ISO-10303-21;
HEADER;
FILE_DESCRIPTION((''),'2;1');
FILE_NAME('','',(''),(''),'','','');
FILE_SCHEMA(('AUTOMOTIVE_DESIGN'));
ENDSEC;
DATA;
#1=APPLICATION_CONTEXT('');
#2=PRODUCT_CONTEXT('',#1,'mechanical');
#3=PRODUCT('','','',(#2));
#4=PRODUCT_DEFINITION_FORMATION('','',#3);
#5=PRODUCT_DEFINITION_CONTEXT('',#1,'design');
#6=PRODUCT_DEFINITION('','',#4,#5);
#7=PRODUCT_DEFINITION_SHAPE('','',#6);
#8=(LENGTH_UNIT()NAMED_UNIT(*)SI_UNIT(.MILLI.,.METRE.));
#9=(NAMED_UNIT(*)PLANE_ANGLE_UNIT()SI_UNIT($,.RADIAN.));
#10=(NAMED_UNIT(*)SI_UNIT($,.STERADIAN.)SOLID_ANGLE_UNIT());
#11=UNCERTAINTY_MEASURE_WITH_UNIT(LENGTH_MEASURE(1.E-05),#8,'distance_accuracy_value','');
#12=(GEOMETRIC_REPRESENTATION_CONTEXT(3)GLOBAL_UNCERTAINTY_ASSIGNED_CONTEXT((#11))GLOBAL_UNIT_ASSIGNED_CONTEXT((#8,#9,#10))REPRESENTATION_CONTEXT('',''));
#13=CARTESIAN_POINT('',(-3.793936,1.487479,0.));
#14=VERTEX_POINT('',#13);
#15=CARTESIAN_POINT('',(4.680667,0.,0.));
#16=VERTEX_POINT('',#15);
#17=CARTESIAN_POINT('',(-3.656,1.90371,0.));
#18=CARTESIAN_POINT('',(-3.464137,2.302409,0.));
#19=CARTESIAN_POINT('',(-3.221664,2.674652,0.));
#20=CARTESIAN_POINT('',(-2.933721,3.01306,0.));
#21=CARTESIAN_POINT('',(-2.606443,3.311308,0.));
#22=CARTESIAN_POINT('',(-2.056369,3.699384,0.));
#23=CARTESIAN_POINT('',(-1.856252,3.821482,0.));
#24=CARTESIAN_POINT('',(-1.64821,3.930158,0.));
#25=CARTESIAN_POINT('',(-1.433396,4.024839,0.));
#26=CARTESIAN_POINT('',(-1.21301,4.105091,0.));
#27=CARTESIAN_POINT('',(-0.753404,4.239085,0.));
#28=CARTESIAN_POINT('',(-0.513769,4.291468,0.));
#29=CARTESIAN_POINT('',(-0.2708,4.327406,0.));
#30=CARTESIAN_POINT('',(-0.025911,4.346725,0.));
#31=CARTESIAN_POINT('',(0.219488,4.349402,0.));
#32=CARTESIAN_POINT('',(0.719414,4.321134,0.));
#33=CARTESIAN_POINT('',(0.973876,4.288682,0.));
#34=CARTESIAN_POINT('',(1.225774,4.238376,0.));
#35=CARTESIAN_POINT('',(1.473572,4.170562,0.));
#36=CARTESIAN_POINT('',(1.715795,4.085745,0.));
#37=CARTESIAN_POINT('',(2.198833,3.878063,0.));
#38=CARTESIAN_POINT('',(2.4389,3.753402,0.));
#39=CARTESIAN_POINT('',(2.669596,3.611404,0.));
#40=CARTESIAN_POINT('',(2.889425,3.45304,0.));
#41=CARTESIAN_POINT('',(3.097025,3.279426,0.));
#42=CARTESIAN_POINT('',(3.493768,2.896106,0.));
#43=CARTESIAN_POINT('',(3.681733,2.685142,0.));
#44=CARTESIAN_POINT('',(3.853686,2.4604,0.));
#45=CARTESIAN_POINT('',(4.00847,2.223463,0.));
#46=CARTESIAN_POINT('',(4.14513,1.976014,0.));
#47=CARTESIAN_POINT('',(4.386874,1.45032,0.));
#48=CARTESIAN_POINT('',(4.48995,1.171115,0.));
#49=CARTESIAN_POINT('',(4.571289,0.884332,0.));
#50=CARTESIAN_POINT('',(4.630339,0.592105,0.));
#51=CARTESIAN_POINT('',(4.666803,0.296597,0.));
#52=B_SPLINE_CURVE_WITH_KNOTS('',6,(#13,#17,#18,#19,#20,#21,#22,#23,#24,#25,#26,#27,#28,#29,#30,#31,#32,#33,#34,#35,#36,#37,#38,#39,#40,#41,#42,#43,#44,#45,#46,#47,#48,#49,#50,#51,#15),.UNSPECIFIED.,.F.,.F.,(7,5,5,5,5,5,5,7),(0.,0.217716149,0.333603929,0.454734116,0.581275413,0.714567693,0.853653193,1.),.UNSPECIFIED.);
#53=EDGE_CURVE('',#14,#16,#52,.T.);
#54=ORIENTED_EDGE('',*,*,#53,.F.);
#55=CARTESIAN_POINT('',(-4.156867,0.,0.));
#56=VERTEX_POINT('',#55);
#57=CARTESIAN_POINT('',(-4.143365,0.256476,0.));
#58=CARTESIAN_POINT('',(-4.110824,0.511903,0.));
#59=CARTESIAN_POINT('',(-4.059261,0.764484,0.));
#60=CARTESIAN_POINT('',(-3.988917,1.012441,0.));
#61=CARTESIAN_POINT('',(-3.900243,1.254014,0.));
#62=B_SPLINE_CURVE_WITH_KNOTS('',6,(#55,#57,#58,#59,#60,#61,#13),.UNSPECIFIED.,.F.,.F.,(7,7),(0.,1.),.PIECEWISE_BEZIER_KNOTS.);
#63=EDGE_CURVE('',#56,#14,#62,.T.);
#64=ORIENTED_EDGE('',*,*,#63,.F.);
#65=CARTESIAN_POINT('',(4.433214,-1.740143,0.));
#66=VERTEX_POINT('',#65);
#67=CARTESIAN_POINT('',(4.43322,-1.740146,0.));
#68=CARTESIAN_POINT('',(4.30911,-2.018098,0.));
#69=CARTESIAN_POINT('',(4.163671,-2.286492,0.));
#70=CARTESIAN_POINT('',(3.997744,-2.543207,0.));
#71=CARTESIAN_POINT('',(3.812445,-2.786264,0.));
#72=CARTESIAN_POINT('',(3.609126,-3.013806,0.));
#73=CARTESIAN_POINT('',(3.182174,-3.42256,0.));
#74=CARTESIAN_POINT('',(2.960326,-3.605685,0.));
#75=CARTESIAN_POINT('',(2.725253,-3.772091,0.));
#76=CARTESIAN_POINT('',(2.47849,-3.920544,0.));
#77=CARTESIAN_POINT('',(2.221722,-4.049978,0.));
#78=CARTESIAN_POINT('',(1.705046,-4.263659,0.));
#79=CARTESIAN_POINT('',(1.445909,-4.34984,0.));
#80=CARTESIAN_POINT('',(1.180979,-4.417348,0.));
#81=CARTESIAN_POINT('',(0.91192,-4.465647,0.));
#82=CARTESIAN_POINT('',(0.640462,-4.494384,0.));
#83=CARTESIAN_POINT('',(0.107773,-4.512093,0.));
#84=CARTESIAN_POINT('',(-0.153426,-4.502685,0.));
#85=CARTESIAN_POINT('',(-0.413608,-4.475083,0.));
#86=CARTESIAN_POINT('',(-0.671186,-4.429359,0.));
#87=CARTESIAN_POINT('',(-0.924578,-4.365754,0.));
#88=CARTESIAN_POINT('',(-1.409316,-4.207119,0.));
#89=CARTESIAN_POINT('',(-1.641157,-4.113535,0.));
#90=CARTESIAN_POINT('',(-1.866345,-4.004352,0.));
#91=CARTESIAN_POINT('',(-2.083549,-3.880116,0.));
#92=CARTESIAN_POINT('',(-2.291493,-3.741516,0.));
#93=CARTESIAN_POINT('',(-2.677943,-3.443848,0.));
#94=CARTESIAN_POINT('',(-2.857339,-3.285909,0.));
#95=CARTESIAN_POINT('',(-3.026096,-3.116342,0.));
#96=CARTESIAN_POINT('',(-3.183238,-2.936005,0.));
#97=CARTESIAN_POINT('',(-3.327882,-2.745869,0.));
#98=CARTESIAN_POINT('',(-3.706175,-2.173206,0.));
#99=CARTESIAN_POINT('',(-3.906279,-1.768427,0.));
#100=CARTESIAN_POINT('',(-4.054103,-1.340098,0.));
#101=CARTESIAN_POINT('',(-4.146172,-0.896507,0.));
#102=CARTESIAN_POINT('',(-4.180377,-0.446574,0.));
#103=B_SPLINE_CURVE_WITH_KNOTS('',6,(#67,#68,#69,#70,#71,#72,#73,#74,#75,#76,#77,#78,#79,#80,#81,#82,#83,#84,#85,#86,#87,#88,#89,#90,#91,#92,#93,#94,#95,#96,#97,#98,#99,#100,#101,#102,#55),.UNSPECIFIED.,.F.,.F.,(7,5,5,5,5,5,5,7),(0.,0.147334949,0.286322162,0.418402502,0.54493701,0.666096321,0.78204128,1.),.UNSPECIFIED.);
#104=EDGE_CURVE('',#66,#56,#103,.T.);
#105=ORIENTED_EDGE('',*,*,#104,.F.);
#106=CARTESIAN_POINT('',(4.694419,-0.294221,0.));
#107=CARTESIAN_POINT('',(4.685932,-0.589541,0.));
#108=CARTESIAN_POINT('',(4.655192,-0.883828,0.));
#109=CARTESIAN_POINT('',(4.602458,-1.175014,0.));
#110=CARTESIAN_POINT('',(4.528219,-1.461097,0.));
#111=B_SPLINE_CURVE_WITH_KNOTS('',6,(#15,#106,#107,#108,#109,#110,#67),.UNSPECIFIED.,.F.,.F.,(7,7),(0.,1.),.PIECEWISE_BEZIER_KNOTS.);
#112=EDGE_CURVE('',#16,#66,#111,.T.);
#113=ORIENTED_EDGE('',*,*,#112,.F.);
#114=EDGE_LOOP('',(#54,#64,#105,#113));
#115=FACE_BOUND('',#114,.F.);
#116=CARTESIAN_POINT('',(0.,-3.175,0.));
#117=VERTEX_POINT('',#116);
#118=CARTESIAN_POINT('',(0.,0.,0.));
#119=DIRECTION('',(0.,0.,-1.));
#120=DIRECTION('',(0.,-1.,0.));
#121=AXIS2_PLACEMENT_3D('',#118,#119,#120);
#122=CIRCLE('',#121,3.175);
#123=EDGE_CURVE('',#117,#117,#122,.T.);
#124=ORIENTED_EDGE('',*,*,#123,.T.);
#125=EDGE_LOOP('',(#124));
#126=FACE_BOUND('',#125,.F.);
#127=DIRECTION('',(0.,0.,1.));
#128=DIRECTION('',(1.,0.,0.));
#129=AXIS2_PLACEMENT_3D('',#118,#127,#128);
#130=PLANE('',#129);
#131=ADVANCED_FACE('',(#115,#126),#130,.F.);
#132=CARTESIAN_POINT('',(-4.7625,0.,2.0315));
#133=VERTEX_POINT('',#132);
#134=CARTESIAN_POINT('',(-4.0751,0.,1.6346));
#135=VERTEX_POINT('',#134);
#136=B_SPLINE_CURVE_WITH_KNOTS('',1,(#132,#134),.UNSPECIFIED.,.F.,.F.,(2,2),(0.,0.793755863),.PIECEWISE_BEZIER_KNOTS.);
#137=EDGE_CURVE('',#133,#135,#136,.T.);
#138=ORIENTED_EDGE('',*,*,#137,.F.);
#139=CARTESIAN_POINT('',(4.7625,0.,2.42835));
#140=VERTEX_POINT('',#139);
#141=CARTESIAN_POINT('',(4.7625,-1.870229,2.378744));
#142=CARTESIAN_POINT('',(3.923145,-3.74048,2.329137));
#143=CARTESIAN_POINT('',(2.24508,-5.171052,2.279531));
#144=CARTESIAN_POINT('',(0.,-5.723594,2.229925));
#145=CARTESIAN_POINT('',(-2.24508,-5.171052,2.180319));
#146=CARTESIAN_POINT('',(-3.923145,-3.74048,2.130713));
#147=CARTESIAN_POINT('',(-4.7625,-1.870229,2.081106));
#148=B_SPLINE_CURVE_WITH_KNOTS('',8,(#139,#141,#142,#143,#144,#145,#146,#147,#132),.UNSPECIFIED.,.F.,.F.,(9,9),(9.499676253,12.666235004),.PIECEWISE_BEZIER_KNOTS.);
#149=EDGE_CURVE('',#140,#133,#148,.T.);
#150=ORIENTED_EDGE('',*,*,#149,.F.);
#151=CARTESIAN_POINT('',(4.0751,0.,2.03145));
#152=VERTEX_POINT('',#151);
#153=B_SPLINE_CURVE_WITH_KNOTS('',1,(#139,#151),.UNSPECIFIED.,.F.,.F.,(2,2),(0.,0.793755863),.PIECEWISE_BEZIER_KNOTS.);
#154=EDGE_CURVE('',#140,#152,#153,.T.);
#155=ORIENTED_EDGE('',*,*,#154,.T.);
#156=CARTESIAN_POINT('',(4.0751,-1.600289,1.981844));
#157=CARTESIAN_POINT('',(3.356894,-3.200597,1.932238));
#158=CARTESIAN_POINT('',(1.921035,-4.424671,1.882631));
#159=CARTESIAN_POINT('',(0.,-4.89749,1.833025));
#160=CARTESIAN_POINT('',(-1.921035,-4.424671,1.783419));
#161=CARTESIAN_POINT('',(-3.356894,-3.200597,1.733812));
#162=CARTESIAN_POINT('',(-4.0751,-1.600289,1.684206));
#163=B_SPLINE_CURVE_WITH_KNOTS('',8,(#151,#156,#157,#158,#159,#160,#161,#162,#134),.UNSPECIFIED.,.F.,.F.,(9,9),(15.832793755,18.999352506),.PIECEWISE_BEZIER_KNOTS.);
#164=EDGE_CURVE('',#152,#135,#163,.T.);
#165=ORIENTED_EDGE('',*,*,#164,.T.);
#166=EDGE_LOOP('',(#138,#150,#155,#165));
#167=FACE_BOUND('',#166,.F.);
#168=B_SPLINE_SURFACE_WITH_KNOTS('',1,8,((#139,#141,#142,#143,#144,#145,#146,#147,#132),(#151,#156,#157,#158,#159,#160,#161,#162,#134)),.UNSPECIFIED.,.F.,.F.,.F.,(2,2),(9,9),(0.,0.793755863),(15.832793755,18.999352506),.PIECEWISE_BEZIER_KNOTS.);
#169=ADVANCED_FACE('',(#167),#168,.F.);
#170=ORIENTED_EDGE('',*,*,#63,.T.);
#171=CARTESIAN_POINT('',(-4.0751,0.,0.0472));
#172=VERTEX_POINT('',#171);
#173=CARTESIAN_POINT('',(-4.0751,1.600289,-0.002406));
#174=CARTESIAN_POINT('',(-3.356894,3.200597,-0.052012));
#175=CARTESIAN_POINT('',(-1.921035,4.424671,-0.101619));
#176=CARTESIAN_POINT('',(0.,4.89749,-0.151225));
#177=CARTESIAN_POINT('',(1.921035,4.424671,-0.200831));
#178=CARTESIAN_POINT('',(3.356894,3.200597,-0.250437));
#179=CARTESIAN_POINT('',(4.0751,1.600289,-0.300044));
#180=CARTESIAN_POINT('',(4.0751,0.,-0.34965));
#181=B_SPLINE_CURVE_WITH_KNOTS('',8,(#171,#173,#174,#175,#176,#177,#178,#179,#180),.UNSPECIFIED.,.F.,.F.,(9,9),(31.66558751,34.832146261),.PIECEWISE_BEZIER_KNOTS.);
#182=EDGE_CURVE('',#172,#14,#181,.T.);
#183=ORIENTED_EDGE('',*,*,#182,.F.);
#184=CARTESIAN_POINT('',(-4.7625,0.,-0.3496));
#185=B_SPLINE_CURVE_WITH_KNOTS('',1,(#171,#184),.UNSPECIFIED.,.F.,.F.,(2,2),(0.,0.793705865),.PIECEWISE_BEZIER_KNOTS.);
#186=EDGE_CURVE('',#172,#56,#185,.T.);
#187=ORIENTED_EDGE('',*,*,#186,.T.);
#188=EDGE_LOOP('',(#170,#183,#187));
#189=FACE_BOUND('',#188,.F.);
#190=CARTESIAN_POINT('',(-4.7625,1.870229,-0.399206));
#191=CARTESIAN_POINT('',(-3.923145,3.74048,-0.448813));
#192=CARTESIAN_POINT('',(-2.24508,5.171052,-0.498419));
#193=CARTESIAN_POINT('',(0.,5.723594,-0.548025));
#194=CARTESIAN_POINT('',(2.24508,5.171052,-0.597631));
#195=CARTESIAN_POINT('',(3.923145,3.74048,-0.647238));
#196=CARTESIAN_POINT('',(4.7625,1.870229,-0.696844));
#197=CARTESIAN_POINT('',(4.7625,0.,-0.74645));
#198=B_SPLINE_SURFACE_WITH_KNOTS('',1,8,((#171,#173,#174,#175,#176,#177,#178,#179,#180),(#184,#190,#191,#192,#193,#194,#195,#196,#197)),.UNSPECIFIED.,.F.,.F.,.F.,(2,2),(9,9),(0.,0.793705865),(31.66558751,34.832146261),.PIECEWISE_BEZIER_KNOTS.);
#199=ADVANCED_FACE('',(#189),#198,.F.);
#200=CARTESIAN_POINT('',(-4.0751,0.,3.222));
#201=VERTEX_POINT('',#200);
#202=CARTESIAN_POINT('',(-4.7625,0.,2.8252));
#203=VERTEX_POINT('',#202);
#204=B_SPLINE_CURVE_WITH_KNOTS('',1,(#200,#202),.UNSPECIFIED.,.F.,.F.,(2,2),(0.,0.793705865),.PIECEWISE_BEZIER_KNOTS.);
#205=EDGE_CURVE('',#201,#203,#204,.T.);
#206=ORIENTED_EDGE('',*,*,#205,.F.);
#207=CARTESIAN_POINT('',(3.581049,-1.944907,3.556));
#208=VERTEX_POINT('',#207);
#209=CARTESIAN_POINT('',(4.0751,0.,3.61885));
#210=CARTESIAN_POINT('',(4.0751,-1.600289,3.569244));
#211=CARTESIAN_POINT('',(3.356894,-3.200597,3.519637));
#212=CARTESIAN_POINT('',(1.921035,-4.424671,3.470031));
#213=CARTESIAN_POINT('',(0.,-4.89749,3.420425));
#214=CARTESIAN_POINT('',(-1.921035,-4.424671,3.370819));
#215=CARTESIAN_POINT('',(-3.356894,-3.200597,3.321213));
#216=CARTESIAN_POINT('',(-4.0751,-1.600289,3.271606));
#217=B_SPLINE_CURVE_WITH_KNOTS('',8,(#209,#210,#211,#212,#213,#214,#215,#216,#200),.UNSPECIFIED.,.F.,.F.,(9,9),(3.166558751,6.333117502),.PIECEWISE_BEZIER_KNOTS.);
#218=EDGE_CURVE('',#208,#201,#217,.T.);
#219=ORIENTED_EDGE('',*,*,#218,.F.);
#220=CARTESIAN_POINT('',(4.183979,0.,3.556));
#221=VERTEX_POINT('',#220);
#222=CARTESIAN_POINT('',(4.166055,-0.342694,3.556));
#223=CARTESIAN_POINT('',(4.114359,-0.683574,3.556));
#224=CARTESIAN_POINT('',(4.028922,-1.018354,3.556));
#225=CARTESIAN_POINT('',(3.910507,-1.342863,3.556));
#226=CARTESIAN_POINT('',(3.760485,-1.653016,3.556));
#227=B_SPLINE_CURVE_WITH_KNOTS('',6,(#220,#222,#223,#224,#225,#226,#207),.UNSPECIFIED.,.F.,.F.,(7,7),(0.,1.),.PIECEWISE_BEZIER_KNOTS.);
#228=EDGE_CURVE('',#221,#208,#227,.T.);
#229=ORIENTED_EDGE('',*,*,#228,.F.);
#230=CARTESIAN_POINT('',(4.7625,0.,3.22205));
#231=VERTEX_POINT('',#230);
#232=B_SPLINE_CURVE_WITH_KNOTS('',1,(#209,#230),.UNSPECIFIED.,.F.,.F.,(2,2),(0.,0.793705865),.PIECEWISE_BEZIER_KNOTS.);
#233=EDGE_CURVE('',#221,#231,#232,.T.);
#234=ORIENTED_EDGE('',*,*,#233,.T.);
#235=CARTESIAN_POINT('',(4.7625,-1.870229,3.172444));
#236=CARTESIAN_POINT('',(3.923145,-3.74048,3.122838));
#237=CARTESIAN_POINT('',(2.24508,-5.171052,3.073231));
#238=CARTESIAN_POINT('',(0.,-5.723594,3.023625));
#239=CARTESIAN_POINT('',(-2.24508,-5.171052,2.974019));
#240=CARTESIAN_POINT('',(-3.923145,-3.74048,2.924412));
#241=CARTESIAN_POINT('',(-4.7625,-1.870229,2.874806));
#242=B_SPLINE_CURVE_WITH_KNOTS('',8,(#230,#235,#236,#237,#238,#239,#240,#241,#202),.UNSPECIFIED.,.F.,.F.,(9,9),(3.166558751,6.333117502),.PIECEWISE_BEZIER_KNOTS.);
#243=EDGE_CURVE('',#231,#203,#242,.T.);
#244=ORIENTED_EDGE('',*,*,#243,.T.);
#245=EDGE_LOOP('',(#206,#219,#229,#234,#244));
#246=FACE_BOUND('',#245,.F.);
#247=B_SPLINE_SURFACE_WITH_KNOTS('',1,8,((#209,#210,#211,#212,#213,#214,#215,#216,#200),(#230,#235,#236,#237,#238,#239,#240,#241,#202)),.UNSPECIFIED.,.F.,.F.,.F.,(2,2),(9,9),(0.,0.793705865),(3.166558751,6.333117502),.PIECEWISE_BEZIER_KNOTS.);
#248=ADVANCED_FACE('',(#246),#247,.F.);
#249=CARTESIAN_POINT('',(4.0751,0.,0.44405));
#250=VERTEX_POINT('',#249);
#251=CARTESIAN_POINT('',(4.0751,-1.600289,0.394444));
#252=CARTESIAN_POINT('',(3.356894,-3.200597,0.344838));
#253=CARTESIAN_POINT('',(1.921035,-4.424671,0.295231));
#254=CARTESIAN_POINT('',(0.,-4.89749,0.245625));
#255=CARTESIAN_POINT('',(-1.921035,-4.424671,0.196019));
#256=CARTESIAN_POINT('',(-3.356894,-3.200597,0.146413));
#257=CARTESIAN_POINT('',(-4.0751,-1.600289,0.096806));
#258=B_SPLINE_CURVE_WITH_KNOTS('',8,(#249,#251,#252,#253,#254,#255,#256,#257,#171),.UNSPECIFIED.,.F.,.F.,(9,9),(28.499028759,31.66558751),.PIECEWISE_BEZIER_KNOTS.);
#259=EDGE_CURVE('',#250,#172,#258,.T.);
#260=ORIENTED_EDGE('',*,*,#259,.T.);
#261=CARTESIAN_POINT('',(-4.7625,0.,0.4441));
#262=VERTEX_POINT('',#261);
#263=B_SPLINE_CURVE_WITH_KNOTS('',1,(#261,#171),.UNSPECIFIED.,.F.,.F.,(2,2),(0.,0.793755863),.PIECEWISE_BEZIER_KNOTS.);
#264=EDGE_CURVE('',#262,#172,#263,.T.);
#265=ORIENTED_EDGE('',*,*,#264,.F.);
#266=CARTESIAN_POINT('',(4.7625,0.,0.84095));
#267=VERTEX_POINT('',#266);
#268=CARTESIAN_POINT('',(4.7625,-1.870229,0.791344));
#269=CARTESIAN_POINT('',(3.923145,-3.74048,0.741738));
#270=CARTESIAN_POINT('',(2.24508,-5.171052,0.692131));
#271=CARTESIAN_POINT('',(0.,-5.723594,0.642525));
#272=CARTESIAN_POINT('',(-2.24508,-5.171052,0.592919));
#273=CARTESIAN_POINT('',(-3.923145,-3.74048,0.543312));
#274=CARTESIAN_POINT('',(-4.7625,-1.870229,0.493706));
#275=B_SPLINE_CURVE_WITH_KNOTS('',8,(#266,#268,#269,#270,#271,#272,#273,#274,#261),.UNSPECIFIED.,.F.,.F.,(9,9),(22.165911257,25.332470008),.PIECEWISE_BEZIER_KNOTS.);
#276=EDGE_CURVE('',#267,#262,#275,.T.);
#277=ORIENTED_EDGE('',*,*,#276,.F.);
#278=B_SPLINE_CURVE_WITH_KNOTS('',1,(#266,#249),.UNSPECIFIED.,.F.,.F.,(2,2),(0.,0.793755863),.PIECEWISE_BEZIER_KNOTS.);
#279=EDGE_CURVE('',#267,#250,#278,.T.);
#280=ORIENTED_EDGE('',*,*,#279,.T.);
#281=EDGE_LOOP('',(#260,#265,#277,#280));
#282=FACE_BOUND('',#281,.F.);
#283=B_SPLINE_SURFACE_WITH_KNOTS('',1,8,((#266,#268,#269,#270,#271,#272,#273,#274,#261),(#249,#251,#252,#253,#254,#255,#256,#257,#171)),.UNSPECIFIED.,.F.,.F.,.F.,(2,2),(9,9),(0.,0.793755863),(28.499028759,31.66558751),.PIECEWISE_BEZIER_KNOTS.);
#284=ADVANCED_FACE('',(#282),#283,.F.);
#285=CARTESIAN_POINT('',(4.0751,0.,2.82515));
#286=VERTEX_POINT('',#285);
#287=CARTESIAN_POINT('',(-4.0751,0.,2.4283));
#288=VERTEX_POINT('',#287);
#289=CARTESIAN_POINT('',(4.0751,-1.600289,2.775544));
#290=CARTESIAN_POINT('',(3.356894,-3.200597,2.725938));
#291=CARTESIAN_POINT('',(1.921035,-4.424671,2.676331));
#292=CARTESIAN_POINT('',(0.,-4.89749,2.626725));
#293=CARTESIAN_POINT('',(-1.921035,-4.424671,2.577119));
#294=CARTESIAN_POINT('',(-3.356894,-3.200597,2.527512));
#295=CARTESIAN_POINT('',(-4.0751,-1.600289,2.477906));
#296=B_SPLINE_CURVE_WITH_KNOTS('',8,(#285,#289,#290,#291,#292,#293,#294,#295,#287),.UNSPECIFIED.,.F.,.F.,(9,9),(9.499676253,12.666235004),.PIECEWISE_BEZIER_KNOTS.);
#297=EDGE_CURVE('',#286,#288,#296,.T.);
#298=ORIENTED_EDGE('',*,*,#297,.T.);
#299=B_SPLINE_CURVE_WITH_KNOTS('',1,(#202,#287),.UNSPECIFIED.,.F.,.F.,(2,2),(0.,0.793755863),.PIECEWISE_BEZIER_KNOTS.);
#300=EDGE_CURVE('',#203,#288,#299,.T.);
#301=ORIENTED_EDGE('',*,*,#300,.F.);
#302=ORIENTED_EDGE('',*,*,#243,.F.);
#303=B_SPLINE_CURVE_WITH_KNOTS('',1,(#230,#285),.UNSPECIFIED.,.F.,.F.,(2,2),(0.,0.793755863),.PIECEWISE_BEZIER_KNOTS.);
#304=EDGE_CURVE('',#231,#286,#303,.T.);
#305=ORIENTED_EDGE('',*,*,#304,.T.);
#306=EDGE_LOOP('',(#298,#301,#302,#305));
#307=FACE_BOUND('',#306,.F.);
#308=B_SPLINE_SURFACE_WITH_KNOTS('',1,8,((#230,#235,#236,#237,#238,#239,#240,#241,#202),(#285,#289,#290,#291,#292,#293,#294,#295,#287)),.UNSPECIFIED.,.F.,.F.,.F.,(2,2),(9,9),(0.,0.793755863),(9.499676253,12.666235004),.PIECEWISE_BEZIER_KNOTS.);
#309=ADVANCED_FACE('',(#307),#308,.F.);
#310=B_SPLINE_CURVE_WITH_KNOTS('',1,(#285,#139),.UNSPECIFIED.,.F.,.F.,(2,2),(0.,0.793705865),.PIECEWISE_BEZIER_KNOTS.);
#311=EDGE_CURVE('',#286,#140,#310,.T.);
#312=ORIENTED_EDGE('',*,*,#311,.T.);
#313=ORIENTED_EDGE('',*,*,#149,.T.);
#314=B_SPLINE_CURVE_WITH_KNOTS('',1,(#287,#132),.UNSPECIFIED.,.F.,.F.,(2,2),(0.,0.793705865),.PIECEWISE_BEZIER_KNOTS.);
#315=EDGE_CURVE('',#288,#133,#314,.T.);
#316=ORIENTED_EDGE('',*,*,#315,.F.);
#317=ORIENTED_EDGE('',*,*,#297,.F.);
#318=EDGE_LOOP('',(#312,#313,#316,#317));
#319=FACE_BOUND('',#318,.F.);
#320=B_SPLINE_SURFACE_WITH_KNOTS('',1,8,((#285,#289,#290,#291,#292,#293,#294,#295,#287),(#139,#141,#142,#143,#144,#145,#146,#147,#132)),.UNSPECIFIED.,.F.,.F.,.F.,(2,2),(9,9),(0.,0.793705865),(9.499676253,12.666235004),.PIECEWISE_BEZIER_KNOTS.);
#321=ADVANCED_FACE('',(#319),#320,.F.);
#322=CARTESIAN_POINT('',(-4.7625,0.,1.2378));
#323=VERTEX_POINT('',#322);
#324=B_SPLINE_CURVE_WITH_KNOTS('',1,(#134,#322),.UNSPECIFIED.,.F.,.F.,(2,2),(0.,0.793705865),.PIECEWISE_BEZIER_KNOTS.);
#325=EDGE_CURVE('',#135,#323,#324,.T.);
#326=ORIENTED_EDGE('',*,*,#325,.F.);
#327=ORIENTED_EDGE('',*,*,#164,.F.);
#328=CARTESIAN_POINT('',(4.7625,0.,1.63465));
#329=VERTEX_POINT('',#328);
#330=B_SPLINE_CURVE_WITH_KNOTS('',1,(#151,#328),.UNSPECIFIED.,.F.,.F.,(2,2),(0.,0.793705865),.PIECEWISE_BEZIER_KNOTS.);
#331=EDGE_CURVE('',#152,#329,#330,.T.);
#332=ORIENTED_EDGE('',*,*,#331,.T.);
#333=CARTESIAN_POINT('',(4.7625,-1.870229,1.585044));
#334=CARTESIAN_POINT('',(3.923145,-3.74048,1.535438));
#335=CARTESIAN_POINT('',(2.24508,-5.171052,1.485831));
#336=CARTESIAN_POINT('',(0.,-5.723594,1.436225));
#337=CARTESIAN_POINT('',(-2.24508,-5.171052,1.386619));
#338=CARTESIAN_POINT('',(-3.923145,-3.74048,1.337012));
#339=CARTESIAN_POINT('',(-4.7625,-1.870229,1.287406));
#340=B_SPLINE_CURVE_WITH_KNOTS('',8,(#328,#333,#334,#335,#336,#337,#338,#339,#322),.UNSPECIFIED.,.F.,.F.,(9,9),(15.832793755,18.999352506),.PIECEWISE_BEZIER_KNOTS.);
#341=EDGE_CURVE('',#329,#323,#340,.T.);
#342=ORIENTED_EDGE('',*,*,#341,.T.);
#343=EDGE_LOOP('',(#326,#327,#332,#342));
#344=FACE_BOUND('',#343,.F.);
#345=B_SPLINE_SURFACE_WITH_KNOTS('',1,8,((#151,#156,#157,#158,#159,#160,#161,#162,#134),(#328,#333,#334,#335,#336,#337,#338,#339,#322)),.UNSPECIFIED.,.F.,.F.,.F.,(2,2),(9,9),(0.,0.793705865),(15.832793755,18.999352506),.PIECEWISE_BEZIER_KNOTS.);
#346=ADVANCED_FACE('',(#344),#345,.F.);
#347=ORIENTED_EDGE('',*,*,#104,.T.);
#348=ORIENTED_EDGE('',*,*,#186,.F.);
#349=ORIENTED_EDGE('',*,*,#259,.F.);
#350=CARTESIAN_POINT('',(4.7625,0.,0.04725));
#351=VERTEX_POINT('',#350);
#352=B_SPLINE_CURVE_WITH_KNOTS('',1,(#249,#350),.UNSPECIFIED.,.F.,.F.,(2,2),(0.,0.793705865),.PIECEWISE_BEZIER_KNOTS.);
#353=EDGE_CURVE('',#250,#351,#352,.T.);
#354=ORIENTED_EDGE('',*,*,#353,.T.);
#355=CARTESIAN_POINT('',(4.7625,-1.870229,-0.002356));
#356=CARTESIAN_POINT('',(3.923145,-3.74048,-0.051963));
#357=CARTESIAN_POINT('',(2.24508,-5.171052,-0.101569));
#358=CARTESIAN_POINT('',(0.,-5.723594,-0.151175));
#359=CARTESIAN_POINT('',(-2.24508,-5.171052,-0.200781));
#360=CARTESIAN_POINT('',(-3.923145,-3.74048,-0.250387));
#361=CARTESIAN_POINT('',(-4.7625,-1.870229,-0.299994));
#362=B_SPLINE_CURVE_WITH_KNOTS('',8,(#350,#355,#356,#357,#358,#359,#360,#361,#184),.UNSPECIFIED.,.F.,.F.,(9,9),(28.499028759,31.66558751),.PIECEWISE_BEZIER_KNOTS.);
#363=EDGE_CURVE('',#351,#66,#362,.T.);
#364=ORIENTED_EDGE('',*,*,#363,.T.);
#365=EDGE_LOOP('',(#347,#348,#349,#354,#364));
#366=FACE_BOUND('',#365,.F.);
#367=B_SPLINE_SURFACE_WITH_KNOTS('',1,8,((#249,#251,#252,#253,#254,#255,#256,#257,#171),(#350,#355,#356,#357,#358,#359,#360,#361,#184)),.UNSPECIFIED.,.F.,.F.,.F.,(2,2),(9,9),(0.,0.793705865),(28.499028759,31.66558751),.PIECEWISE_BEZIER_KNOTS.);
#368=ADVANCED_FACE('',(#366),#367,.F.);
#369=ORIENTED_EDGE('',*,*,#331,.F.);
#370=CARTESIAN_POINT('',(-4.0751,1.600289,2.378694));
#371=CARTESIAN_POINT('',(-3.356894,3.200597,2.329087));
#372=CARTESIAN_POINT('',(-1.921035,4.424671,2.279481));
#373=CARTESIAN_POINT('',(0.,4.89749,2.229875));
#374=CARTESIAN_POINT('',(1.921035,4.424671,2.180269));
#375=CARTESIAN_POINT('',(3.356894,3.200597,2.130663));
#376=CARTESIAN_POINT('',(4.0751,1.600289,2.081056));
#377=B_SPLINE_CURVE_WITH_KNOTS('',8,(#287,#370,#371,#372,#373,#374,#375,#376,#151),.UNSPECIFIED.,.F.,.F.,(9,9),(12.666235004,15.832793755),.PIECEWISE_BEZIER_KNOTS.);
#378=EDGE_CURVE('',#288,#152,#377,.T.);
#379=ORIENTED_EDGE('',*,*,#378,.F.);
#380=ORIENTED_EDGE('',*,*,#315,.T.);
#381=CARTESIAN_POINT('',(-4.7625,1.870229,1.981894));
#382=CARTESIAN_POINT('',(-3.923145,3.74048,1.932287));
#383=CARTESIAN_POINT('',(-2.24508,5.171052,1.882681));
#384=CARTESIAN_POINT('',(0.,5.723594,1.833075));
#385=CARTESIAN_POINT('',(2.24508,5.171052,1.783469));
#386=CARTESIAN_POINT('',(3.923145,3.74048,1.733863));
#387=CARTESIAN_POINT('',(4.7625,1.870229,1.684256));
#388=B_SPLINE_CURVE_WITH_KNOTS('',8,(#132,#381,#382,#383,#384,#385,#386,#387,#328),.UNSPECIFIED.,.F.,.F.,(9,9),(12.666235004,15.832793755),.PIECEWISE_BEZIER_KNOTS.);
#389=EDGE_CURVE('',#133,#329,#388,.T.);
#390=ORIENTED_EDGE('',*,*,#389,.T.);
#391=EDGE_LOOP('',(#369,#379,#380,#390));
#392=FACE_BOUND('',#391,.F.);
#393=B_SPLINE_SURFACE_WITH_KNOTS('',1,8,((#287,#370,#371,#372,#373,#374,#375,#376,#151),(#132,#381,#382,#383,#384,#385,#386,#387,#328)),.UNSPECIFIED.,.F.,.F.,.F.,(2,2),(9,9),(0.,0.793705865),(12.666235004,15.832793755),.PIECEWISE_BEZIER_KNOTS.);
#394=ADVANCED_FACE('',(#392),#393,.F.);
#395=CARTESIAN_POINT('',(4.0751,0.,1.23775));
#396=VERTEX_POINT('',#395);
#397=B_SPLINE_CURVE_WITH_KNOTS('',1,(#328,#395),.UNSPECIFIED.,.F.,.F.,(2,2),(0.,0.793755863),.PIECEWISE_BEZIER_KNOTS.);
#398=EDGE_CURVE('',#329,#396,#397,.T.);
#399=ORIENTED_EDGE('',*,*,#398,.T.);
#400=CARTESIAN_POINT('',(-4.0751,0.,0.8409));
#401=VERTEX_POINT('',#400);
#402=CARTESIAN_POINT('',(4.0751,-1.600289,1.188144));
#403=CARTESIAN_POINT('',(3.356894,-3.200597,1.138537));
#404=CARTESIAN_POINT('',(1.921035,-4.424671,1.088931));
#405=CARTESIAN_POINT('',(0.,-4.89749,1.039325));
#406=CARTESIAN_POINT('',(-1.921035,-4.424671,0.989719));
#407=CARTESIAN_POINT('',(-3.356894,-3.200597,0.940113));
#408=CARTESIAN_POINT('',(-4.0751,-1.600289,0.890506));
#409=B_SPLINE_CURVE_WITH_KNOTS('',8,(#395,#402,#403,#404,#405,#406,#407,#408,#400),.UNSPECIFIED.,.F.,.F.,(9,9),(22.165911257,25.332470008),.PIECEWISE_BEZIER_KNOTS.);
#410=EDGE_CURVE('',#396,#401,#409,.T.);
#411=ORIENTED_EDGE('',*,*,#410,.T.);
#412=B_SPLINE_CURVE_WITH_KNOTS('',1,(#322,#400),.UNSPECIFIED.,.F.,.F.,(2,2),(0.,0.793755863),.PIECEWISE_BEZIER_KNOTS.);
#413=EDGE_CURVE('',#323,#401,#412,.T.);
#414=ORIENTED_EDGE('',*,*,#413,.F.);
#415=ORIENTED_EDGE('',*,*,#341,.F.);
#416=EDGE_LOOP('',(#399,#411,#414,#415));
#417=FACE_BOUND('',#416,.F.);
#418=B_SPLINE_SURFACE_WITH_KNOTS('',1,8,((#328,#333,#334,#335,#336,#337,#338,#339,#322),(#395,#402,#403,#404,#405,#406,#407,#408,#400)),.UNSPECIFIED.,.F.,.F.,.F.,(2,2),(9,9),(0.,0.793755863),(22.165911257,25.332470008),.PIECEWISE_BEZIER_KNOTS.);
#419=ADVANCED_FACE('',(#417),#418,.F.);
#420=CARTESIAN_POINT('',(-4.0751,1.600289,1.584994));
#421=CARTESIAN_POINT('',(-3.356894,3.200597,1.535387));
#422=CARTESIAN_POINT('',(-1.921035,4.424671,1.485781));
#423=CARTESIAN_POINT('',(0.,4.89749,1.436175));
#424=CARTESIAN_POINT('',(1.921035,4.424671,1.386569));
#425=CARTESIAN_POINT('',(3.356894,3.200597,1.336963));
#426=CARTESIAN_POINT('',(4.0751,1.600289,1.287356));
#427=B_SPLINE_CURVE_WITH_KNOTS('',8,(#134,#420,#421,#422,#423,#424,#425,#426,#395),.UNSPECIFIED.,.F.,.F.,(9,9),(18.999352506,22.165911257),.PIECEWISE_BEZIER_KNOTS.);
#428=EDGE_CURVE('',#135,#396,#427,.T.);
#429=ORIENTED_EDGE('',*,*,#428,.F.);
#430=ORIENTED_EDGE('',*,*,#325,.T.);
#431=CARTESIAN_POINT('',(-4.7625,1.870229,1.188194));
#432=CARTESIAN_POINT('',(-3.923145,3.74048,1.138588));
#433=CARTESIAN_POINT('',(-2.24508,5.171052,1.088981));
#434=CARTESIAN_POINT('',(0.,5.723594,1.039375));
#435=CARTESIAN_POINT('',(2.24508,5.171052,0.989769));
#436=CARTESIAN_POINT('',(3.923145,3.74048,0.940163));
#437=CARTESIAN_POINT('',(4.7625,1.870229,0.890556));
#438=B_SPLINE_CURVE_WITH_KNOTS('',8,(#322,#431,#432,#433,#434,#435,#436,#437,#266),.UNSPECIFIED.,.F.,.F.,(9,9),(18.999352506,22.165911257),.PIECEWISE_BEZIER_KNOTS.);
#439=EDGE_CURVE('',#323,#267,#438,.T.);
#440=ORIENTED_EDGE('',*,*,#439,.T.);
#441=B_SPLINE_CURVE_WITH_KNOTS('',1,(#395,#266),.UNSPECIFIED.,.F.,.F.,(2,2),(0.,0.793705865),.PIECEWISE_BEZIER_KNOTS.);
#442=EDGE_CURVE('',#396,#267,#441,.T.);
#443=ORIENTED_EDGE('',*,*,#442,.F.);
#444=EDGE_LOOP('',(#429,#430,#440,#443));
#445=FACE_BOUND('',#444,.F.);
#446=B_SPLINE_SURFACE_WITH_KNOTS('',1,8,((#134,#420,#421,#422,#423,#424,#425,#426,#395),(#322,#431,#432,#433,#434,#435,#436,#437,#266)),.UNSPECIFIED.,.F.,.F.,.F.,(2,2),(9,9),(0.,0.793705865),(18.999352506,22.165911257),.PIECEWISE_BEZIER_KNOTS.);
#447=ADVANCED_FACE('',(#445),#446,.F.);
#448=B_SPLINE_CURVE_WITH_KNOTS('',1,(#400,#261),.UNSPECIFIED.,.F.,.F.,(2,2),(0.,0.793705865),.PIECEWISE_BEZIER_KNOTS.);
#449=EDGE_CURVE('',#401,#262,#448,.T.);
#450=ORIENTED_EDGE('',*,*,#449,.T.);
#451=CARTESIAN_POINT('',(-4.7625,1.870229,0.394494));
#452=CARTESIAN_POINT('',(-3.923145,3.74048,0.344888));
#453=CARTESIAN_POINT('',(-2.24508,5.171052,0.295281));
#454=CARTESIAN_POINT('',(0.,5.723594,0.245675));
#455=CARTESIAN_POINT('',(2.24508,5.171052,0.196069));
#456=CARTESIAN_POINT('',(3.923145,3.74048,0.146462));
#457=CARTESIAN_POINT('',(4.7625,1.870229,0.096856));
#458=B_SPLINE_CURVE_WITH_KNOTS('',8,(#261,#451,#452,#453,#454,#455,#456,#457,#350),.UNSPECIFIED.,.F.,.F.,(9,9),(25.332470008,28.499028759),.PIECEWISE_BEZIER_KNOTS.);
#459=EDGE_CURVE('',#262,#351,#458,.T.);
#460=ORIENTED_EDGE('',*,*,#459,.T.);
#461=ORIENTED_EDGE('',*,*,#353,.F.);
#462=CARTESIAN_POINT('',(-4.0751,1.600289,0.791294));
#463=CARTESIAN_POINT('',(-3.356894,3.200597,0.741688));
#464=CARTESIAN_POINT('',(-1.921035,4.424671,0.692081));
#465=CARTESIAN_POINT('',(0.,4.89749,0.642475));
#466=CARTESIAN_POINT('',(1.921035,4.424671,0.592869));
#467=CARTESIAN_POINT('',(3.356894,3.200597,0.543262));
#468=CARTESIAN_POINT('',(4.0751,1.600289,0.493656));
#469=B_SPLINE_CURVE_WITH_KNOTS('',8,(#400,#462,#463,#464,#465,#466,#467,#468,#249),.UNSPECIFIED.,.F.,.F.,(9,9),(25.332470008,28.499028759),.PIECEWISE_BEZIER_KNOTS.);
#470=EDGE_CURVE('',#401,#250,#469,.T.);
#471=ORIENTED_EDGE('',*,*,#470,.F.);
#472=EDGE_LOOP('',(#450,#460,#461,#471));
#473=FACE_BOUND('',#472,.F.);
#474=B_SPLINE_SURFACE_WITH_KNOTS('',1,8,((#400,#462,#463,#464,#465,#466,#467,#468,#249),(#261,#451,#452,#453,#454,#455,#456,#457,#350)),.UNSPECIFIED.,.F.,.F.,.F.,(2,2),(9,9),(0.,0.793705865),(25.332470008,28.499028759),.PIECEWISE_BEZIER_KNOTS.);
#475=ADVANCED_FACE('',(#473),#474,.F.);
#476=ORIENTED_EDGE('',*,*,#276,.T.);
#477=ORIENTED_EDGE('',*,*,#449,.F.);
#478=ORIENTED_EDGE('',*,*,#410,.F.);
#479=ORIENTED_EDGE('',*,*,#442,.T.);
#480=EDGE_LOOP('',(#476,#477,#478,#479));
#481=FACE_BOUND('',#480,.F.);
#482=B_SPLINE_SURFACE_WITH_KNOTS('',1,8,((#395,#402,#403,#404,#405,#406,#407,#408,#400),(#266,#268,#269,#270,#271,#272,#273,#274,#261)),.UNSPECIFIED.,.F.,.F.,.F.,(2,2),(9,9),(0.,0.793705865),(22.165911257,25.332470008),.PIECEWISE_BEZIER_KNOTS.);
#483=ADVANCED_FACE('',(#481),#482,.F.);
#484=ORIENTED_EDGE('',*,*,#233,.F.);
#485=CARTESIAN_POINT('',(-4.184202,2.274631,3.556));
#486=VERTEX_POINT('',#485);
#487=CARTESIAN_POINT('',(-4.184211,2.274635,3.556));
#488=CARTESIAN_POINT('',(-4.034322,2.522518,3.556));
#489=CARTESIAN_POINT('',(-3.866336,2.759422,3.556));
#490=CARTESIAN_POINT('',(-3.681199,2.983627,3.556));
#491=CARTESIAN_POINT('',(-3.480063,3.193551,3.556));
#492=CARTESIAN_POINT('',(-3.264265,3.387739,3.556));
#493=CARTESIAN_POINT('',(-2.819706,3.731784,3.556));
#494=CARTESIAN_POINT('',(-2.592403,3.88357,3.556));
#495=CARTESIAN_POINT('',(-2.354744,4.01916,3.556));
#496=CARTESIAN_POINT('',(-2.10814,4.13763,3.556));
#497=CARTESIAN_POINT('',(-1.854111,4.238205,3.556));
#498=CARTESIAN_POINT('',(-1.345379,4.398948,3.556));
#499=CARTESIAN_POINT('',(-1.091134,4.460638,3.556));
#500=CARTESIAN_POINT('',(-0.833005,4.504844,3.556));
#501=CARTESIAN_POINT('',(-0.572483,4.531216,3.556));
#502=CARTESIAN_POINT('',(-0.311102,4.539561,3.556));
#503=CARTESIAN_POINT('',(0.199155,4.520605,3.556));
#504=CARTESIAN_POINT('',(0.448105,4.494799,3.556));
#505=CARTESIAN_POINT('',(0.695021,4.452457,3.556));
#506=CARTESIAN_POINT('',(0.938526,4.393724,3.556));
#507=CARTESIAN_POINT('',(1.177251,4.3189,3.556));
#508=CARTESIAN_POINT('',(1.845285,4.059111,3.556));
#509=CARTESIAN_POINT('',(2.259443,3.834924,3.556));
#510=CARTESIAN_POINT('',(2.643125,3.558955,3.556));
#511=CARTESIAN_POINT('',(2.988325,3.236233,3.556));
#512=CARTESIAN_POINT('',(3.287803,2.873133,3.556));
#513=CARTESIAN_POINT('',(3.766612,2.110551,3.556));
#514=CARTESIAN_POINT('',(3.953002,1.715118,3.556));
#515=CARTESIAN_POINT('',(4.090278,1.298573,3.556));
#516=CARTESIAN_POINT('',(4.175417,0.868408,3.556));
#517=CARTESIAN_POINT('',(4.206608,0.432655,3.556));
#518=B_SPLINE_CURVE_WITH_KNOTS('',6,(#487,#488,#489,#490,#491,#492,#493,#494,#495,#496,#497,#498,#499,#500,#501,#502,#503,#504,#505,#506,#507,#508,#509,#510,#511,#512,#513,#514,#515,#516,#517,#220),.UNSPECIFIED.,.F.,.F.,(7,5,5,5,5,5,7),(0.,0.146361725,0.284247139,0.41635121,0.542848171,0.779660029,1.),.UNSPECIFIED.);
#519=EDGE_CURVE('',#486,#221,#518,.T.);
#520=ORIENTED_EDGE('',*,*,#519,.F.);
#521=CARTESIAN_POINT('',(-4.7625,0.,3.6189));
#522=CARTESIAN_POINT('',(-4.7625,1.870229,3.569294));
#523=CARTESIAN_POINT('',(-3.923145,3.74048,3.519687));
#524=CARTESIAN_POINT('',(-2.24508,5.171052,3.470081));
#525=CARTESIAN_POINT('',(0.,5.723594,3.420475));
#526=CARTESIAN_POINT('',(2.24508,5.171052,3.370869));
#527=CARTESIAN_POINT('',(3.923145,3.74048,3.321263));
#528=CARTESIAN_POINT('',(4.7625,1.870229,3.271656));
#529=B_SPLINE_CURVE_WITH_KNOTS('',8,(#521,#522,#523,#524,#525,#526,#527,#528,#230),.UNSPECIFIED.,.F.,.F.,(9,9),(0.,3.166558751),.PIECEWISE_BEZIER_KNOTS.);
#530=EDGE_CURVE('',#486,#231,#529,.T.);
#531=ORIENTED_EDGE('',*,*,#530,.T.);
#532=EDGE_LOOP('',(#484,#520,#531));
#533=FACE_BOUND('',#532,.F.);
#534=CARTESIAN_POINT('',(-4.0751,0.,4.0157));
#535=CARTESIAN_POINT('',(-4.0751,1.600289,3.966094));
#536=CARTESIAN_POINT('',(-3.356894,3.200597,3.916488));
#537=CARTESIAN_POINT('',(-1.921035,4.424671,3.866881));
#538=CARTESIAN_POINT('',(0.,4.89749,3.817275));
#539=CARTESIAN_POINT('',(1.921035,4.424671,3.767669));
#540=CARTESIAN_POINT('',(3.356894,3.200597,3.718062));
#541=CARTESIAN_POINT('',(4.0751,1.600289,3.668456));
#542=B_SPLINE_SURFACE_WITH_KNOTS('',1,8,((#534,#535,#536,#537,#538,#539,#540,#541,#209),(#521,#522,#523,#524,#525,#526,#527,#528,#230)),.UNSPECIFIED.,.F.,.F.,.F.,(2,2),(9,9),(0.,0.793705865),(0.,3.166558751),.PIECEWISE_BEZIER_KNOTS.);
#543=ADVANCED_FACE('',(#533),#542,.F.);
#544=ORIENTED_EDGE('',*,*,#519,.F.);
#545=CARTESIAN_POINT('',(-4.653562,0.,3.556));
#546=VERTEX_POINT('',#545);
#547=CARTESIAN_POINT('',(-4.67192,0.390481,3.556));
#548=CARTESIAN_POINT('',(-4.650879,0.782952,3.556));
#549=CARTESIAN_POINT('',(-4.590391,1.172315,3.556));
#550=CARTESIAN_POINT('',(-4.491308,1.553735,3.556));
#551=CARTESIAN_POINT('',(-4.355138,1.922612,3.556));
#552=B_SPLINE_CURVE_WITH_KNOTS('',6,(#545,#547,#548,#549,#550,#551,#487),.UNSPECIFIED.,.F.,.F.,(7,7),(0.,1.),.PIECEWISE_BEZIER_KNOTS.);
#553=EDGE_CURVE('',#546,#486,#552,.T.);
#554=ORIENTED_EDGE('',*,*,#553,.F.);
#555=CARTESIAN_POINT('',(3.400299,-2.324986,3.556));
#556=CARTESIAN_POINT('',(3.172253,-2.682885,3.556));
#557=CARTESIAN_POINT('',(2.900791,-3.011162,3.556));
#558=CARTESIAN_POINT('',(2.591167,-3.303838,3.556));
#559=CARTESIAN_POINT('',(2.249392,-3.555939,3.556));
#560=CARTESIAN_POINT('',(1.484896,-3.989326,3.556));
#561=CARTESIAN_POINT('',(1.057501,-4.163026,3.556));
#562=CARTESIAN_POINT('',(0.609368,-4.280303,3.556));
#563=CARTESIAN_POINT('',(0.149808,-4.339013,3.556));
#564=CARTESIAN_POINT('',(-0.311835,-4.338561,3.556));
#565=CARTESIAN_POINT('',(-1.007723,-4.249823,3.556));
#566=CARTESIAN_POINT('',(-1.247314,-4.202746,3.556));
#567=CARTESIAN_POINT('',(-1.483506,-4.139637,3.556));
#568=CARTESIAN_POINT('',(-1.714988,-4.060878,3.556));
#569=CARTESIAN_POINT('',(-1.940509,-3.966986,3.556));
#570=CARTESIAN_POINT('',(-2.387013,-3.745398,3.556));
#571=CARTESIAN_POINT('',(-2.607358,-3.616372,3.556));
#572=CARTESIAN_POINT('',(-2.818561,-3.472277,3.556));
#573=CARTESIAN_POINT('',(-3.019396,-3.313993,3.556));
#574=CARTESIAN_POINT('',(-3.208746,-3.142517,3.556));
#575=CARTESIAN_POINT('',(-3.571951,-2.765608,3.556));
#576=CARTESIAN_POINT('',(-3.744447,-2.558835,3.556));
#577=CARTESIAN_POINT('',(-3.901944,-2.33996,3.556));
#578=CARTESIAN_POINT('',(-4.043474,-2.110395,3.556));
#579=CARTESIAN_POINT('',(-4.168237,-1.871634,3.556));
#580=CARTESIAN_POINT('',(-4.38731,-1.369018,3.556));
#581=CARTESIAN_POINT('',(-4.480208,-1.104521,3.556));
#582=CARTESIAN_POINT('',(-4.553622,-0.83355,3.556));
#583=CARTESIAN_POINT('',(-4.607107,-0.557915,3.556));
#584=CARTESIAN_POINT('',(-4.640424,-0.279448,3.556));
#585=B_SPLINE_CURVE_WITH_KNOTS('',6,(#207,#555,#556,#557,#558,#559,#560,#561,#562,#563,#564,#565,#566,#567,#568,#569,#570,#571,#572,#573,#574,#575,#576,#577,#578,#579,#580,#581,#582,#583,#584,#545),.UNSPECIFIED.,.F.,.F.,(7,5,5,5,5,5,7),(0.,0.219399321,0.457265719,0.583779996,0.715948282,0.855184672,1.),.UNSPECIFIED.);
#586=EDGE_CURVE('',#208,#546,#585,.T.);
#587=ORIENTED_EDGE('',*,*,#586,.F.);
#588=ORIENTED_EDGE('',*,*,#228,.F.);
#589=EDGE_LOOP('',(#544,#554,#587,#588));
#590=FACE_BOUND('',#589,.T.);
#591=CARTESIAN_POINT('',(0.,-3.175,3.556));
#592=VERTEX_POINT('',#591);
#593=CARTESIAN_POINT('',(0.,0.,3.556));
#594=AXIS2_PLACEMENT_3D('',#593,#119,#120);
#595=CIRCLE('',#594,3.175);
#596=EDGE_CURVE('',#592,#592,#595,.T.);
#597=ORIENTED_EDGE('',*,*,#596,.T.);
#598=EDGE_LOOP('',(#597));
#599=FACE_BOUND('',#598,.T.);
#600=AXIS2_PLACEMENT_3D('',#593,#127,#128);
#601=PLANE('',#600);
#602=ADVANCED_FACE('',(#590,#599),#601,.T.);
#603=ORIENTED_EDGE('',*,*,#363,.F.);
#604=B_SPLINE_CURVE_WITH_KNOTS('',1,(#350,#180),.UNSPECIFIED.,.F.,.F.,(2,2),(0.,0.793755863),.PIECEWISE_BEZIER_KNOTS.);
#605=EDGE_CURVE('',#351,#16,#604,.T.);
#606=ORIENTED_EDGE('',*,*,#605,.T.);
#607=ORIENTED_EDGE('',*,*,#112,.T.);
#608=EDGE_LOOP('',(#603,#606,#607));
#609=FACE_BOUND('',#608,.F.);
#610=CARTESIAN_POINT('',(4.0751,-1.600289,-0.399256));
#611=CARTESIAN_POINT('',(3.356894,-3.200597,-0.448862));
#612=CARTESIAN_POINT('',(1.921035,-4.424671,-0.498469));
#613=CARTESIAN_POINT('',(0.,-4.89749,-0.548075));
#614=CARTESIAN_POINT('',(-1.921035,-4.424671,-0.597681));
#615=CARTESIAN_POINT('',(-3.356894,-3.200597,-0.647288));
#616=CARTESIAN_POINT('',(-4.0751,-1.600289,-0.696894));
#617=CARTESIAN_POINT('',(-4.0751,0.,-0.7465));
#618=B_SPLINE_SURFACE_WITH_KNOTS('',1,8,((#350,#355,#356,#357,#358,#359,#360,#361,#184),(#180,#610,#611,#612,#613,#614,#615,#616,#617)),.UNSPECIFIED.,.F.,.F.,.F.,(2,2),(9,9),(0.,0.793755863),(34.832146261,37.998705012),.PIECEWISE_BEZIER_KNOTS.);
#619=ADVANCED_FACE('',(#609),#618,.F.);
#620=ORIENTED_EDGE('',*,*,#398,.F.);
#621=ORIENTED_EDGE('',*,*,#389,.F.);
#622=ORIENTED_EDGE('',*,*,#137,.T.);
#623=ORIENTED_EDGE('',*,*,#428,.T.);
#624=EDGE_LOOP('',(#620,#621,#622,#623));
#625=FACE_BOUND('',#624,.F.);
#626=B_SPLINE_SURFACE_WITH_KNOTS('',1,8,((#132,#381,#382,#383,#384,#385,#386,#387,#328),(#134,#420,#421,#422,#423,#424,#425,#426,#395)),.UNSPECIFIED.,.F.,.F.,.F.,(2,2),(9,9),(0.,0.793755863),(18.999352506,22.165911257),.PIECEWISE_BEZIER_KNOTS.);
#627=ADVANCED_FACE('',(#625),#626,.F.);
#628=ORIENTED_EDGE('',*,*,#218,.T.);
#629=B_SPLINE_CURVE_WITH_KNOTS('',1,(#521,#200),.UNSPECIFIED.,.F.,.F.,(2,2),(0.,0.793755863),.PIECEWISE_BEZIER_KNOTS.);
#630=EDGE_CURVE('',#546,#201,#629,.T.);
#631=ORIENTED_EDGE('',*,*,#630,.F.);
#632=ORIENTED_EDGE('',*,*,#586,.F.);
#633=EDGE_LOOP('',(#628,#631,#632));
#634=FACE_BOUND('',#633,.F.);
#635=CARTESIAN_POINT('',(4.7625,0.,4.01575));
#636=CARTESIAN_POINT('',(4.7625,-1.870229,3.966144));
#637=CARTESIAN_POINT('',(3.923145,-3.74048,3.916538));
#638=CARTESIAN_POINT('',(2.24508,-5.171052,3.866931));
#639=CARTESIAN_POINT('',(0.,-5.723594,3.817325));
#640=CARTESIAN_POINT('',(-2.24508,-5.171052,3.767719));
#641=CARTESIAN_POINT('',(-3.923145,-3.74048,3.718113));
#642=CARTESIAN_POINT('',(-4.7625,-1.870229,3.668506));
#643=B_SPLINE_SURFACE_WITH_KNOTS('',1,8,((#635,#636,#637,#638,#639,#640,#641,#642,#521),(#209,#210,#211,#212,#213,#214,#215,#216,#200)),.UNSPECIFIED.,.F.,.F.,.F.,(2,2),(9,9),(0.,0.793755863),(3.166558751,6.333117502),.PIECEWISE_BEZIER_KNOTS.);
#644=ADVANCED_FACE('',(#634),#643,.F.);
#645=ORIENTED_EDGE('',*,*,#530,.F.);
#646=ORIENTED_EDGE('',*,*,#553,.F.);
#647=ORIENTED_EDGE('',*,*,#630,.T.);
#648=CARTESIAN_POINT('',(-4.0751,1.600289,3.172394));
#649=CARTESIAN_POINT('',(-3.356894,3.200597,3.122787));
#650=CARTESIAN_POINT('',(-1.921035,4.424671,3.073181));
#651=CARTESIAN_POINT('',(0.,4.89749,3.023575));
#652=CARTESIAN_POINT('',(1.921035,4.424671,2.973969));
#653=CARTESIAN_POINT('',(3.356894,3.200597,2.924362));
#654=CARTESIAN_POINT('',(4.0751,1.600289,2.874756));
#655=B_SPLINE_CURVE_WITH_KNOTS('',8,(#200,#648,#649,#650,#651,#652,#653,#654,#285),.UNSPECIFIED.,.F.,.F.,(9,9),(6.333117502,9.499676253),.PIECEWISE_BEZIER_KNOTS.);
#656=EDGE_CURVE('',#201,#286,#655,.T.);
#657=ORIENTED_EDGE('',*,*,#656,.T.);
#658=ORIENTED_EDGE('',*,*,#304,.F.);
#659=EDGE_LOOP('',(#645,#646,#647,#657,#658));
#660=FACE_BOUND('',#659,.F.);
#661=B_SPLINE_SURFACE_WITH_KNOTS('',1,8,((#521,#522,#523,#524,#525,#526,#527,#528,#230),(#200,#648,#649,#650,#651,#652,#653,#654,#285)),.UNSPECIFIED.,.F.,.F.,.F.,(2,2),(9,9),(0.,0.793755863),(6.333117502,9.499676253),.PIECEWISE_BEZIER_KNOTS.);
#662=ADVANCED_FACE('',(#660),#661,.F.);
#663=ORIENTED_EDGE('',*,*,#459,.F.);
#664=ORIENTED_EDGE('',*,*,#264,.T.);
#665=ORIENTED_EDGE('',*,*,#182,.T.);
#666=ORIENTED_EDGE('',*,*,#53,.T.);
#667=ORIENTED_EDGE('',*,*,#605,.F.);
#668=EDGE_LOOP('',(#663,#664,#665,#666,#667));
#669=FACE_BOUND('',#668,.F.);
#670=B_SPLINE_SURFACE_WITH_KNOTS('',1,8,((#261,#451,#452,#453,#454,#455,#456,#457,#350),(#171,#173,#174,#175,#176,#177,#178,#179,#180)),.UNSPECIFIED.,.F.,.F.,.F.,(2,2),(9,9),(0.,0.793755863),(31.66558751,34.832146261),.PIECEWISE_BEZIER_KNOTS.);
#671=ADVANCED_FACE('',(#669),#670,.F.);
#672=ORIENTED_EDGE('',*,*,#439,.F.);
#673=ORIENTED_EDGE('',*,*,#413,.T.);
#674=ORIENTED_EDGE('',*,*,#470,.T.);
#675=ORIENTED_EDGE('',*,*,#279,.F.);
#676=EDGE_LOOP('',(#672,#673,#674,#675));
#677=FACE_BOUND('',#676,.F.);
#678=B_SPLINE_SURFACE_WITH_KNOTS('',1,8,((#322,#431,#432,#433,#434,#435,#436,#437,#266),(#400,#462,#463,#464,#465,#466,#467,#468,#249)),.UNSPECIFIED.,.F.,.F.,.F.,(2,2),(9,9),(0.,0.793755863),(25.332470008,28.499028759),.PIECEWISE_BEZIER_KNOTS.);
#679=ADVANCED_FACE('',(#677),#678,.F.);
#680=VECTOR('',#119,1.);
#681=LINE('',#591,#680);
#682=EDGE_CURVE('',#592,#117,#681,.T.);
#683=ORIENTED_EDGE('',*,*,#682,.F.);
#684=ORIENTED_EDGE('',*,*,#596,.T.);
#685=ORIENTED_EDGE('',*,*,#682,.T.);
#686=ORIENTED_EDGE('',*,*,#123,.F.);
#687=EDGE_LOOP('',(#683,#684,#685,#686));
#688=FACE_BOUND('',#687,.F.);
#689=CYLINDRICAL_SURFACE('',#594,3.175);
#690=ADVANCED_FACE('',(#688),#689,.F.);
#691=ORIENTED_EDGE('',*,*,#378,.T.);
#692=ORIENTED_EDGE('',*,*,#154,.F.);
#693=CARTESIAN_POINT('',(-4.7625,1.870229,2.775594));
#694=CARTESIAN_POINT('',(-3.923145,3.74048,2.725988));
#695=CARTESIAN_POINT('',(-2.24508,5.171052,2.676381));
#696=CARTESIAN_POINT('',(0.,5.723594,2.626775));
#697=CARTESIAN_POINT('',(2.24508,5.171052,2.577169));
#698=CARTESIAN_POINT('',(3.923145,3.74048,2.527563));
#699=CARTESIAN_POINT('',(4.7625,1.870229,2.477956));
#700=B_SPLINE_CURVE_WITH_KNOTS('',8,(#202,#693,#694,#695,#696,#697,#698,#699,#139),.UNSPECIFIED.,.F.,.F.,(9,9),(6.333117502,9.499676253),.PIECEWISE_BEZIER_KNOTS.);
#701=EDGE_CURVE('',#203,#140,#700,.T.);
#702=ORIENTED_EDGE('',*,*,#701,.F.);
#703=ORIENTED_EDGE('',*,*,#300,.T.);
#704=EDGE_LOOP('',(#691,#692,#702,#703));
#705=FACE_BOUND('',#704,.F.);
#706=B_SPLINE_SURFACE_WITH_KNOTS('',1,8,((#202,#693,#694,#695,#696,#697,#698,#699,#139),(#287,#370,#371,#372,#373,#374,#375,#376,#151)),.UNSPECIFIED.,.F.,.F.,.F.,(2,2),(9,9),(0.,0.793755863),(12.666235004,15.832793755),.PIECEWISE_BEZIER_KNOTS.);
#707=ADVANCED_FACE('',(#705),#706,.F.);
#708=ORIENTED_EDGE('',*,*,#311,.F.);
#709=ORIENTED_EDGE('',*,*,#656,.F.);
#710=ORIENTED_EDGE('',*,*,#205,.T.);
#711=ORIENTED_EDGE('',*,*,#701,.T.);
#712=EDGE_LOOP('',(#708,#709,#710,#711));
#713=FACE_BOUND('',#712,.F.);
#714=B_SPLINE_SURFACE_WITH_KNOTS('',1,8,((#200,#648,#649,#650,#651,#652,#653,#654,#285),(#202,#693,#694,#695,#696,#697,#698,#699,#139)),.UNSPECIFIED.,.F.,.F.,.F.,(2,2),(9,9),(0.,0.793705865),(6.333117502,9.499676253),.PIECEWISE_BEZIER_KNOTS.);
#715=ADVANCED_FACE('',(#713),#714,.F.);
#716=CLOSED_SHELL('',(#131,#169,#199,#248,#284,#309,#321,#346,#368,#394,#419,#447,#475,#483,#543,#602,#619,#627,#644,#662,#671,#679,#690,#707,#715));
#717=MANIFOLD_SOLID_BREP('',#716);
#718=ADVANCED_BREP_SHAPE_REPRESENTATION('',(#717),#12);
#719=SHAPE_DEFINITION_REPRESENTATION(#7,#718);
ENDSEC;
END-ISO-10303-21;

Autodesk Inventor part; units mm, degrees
ref_plane "YZ Plane" through (0, 0, 0) normal (1, 0, 0) x (0, 1, 0)
ref_plane "XZ Plane" through (0, 0, 0) normal (0, 1, 0) x (-1, 0, 0)
ref_plane "XY Plane" through (0, 0, 0) normal (0, 0, 1) x (1, 0, 0)
sketch "Sketch1" plane through (0, 0, 0) normal (0, 0, 1) x (1, 0, 0)
  circle A0 centre (0, 0) radius 4.7625
  dimension "d0" = 9.525
extrude "Extrusion1" add sketch "Sketch1" along normal blind 3.556
sketch "Sketch2" plane through (0, 0, 0) normal (0, 1, 0) x (-1, 0, 0)
  line L0 (4.7625, 4.4126) -> (4.0751, 4.0157)
  line L1 (4.0751, 4.0157) -> (4.7625, 3.6189)
  line L2 (4.7625, 3.6189) -> (4.7625, 4.4126)
  line L3 (4.7625, 0) -> (4.7625, 3.556) projected
  point P0 (0, 0)
  dimension "d3" = 60
  dimension "d4" = 0.7937
  dimension "d5" = 0.3969
coil "Coil1" sketch "Sketch2" operation cut axis through (0, 0, -10) along (0, 0, -1) pitch 0.7937 turns 7 hand right
sketch "Sketch3" plane through (0, 0, 3.556) normal (0, 0, 1) x (1, 0, 0)
  point P0 (0, 0)
  point P1 (0, 0)
hole "Hole1" at (0, 0, 3.556) direction (0, 0, -1) diameter 6.35 end through all
equation "\"d5\" = 0.5 * d4"
properties part number "Rod" material "Stainless Steel"
